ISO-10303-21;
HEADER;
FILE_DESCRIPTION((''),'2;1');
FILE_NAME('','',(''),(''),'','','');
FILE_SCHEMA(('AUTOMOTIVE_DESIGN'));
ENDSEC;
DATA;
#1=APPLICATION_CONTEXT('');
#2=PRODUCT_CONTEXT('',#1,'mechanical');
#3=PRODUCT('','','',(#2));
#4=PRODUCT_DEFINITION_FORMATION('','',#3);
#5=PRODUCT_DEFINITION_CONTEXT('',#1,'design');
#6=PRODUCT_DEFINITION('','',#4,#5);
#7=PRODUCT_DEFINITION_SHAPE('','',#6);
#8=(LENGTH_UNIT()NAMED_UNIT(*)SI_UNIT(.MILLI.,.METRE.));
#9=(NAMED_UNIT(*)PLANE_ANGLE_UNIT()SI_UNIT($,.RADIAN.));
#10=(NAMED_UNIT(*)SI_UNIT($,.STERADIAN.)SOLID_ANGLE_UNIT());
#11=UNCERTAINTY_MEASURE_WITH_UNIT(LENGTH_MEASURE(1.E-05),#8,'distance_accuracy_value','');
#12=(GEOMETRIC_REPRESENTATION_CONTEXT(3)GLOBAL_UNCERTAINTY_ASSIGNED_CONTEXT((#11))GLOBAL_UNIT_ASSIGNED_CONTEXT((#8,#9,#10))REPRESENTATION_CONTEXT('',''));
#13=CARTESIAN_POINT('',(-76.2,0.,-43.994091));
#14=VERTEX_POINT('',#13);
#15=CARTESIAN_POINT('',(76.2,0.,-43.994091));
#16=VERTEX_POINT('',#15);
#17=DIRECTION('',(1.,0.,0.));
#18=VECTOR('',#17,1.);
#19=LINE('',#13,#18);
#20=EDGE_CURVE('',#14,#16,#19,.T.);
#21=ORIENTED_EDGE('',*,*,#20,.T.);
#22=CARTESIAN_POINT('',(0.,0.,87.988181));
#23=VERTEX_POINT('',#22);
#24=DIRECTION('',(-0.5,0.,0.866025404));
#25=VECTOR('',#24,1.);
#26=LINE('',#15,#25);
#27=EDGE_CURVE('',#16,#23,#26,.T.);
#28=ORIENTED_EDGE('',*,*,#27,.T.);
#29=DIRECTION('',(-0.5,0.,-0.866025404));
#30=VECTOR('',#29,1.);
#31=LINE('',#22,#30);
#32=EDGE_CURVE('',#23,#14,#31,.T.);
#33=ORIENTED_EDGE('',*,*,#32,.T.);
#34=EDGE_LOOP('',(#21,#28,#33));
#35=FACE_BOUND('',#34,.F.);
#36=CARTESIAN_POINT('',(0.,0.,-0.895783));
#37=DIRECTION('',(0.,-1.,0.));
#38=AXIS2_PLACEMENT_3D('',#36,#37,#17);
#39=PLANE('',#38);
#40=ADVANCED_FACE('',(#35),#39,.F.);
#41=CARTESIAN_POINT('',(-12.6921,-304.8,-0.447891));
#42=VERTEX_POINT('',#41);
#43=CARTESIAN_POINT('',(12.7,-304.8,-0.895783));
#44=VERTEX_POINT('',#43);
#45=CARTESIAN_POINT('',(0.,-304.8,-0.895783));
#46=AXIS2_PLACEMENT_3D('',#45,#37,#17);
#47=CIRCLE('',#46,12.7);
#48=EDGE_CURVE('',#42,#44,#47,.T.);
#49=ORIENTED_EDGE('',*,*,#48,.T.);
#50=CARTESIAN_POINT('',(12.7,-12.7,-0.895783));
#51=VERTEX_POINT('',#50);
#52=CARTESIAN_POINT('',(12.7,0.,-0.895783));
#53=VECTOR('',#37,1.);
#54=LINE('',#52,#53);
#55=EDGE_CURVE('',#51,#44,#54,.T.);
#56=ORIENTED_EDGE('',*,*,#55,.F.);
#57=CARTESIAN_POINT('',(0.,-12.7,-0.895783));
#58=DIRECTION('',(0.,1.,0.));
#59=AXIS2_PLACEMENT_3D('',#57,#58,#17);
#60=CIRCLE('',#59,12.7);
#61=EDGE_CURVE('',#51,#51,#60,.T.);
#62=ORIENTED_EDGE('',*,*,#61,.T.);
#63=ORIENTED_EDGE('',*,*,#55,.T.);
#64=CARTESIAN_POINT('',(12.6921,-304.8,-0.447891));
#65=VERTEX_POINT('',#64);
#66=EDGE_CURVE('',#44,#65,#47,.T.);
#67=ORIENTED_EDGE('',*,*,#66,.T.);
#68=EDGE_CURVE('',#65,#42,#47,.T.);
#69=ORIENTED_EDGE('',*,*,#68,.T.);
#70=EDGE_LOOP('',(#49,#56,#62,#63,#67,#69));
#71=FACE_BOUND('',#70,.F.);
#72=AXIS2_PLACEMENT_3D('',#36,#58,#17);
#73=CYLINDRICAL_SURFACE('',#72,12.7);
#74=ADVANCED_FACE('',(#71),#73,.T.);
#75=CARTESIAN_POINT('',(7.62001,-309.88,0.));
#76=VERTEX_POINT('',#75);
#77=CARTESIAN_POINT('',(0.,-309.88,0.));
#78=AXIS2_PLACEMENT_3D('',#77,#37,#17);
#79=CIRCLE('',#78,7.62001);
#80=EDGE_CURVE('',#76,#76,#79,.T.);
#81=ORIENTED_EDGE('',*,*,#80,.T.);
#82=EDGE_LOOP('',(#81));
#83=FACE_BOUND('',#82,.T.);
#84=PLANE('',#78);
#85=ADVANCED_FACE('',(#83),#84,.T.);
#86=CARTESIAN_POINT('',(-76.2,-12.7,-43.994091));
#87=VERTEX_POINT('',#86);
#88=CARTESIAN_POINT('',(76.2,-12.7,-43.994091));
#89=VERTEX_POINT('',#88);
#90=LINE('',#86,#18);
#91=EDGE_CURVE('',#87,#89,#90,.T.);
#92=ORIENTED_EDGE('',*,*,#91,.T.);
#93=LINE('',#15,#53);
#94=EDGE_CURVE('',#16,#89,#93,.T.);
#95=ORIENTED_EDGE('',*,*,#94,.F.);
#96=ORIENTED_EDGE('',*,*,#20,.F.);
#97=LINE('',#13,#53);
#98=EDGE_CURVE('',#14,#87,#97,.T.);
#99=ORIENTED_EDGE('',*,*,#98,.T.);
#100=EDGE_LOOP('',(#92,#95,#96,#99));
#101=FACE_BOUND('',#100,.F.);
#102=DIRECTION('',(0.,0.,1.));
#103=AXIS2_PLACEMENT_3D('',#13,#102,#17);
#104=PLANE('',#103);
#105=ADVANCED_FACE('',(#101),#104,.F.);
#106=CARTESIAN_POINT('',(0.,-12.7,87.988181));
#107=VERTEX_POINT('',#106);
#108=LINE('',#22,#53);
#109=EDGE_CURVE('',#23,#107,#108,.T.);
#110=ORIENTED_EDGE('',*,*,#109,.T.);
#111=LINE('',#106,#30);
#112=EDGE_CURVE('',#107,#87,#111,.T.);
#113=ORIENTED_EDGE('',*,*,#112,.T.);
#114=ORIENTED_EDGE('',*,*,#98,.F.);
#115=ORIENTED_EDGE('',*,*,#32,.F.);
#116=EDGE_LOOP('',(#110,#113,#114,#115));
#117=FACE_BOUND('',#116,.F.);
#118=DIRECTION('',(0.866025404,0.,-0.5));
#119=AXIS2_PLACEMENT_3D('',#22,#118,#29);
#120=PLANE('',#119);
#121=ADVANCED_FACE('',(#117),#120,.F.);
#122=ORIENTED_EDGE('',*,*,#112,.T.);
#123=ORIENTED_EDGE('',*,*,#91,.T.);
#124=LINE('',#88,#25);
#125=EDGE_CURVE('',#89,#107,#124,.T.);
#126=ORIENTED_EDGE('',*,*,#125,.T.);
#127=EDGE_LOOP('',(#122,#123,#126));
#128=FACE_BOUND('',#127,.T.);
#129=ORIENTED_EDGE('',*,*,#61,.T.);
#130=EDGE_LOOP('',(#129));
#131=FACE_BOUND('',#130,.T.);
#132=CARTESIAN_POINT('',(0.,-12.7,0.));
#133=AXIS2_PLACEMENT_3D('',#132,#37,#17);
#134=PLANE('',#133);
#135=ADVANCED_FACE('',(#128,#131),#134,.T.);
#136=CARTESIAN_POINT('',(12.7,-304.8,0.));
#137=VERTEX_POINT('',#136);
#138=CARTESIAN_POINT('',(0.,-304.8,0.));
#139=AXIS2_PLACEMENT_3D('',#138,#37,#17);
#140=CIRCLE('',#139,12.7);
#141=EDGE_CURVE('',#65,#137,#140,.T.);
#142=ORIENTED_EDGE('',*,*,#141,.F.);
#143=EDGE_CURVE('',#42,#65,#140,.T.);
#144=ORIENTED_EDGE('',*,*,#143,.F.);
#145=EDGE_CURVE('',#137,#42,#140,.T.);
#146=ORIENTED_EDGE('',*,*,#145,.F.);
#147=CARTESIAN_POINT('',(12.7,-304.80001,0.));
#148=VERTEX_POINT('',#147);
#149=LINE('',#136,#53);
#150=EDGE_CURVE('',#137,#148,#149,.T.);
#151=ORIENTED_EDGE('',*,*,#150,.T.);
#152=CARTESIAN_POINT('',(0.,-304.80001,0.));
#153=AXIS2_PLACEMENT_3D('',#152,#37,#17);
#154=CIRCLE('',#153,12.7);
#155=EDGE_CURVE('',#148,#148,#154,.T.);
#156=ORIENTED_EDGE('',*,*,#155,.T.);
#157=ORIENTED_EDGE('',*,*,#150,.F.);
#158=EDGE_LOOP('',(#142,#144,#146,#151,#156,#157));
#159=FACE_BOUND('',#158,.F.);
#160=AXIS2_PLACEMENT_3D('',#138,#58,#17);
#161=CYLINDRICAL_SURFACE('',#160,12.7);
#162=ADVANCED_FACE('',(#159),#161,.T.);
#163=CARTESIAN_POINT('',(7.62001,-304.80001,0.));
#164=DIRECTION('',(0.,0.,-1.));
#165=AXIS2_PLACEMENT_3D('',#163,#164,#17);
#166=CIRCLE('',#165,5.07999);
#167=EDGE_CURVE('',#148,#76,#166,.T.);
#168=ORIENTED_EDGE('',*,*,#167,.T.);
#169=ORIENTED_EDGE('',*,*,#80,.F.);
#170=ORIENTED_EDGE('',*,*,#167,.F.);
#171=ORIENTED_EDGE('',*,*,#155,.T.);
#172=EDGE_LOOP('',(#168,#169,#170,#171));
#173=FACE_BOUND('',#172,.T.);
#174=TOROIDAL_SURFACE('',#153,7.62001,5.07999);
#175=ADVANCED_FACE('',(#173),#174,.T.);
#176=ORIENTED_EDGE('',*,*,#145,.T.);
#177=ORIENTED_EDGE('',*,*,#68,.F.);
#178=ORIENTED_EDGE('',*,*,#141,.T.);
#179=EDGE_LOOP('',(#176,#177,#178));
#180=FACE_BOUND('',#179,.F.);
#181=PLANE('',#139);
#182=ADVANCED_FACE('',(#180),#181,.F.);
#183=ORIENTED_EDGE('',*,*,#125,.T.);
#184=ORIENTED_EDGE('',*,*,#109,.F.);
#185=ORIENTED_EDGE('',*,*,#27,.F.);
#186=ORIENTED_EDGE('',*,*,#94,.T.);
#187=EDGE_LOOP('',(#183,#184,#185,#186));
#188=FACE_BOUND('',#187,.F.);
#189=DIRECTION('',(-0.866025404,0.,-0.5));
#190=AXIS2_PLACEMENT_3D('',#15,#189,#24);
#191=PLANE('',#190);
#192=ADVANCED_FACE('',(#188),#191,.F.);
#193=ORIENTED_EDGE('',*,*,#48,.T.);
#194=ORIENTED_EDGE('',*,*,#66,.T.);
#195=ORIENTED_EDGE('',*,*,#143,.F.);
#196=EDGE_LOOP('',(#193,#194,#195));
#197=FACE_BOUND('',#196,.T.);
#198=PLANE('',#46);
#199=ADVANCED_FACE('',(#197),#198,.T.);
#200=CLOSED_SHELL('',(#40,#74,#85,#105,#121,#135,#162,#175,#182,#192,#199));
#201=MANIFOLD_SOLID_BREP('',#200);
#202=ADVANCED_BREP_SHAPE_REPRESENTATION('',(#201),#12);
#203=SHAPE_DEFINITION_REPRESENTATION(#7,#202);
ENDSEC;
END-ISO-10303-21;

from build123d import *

# Parameters (mm, degrees)
F1_DEPTH = 12.7
F2_R     = 12.7
F3_DEPTH = 304.8
F4_R     = 12.7
F5_DEPTH = 5.08
F6_R     = 5.07999


# Not quite as in the source:
# - a fillet or chamfer is up to 0.001 mm smaller than in the source, because OpenCascade refuses the exact size


with BuildPart() as f1:
    # F0 (on Front) → F1 (new body)
    with BuildSketch(Plane.XZ):
        Polygon((-76.2, -43.9940905122), (76.2, -43.9940905122), (0, 87.9881810245), align=None)
    extrude(amount=F1_DEPTH)

    # F2 (on Front) → F3 (join)
    with BuildSketch(Plane.XZ):
        with Locations((0, -0.8957827414)):
            Circle(F2_R)
    extrude(amount=F3_DEPTH)

    # F4 (on face) → F5 (join)
    with BuildSketch(Plane.XZ.offset(304.8)):
        Circle(F4_R)
    extrude(amount=F5_DEPTH)

    # F6 (radius 5.08 in the source; OpenCascade refuses exactly that, so slightly less here)
    f6_edges = [f1.edges().sort_by_distance(p)[0] for p in [
        (-12.7, -309.88, 0),
    ]]
    fillet(f6_edges, radius=F6_R)


solid = f1.part
